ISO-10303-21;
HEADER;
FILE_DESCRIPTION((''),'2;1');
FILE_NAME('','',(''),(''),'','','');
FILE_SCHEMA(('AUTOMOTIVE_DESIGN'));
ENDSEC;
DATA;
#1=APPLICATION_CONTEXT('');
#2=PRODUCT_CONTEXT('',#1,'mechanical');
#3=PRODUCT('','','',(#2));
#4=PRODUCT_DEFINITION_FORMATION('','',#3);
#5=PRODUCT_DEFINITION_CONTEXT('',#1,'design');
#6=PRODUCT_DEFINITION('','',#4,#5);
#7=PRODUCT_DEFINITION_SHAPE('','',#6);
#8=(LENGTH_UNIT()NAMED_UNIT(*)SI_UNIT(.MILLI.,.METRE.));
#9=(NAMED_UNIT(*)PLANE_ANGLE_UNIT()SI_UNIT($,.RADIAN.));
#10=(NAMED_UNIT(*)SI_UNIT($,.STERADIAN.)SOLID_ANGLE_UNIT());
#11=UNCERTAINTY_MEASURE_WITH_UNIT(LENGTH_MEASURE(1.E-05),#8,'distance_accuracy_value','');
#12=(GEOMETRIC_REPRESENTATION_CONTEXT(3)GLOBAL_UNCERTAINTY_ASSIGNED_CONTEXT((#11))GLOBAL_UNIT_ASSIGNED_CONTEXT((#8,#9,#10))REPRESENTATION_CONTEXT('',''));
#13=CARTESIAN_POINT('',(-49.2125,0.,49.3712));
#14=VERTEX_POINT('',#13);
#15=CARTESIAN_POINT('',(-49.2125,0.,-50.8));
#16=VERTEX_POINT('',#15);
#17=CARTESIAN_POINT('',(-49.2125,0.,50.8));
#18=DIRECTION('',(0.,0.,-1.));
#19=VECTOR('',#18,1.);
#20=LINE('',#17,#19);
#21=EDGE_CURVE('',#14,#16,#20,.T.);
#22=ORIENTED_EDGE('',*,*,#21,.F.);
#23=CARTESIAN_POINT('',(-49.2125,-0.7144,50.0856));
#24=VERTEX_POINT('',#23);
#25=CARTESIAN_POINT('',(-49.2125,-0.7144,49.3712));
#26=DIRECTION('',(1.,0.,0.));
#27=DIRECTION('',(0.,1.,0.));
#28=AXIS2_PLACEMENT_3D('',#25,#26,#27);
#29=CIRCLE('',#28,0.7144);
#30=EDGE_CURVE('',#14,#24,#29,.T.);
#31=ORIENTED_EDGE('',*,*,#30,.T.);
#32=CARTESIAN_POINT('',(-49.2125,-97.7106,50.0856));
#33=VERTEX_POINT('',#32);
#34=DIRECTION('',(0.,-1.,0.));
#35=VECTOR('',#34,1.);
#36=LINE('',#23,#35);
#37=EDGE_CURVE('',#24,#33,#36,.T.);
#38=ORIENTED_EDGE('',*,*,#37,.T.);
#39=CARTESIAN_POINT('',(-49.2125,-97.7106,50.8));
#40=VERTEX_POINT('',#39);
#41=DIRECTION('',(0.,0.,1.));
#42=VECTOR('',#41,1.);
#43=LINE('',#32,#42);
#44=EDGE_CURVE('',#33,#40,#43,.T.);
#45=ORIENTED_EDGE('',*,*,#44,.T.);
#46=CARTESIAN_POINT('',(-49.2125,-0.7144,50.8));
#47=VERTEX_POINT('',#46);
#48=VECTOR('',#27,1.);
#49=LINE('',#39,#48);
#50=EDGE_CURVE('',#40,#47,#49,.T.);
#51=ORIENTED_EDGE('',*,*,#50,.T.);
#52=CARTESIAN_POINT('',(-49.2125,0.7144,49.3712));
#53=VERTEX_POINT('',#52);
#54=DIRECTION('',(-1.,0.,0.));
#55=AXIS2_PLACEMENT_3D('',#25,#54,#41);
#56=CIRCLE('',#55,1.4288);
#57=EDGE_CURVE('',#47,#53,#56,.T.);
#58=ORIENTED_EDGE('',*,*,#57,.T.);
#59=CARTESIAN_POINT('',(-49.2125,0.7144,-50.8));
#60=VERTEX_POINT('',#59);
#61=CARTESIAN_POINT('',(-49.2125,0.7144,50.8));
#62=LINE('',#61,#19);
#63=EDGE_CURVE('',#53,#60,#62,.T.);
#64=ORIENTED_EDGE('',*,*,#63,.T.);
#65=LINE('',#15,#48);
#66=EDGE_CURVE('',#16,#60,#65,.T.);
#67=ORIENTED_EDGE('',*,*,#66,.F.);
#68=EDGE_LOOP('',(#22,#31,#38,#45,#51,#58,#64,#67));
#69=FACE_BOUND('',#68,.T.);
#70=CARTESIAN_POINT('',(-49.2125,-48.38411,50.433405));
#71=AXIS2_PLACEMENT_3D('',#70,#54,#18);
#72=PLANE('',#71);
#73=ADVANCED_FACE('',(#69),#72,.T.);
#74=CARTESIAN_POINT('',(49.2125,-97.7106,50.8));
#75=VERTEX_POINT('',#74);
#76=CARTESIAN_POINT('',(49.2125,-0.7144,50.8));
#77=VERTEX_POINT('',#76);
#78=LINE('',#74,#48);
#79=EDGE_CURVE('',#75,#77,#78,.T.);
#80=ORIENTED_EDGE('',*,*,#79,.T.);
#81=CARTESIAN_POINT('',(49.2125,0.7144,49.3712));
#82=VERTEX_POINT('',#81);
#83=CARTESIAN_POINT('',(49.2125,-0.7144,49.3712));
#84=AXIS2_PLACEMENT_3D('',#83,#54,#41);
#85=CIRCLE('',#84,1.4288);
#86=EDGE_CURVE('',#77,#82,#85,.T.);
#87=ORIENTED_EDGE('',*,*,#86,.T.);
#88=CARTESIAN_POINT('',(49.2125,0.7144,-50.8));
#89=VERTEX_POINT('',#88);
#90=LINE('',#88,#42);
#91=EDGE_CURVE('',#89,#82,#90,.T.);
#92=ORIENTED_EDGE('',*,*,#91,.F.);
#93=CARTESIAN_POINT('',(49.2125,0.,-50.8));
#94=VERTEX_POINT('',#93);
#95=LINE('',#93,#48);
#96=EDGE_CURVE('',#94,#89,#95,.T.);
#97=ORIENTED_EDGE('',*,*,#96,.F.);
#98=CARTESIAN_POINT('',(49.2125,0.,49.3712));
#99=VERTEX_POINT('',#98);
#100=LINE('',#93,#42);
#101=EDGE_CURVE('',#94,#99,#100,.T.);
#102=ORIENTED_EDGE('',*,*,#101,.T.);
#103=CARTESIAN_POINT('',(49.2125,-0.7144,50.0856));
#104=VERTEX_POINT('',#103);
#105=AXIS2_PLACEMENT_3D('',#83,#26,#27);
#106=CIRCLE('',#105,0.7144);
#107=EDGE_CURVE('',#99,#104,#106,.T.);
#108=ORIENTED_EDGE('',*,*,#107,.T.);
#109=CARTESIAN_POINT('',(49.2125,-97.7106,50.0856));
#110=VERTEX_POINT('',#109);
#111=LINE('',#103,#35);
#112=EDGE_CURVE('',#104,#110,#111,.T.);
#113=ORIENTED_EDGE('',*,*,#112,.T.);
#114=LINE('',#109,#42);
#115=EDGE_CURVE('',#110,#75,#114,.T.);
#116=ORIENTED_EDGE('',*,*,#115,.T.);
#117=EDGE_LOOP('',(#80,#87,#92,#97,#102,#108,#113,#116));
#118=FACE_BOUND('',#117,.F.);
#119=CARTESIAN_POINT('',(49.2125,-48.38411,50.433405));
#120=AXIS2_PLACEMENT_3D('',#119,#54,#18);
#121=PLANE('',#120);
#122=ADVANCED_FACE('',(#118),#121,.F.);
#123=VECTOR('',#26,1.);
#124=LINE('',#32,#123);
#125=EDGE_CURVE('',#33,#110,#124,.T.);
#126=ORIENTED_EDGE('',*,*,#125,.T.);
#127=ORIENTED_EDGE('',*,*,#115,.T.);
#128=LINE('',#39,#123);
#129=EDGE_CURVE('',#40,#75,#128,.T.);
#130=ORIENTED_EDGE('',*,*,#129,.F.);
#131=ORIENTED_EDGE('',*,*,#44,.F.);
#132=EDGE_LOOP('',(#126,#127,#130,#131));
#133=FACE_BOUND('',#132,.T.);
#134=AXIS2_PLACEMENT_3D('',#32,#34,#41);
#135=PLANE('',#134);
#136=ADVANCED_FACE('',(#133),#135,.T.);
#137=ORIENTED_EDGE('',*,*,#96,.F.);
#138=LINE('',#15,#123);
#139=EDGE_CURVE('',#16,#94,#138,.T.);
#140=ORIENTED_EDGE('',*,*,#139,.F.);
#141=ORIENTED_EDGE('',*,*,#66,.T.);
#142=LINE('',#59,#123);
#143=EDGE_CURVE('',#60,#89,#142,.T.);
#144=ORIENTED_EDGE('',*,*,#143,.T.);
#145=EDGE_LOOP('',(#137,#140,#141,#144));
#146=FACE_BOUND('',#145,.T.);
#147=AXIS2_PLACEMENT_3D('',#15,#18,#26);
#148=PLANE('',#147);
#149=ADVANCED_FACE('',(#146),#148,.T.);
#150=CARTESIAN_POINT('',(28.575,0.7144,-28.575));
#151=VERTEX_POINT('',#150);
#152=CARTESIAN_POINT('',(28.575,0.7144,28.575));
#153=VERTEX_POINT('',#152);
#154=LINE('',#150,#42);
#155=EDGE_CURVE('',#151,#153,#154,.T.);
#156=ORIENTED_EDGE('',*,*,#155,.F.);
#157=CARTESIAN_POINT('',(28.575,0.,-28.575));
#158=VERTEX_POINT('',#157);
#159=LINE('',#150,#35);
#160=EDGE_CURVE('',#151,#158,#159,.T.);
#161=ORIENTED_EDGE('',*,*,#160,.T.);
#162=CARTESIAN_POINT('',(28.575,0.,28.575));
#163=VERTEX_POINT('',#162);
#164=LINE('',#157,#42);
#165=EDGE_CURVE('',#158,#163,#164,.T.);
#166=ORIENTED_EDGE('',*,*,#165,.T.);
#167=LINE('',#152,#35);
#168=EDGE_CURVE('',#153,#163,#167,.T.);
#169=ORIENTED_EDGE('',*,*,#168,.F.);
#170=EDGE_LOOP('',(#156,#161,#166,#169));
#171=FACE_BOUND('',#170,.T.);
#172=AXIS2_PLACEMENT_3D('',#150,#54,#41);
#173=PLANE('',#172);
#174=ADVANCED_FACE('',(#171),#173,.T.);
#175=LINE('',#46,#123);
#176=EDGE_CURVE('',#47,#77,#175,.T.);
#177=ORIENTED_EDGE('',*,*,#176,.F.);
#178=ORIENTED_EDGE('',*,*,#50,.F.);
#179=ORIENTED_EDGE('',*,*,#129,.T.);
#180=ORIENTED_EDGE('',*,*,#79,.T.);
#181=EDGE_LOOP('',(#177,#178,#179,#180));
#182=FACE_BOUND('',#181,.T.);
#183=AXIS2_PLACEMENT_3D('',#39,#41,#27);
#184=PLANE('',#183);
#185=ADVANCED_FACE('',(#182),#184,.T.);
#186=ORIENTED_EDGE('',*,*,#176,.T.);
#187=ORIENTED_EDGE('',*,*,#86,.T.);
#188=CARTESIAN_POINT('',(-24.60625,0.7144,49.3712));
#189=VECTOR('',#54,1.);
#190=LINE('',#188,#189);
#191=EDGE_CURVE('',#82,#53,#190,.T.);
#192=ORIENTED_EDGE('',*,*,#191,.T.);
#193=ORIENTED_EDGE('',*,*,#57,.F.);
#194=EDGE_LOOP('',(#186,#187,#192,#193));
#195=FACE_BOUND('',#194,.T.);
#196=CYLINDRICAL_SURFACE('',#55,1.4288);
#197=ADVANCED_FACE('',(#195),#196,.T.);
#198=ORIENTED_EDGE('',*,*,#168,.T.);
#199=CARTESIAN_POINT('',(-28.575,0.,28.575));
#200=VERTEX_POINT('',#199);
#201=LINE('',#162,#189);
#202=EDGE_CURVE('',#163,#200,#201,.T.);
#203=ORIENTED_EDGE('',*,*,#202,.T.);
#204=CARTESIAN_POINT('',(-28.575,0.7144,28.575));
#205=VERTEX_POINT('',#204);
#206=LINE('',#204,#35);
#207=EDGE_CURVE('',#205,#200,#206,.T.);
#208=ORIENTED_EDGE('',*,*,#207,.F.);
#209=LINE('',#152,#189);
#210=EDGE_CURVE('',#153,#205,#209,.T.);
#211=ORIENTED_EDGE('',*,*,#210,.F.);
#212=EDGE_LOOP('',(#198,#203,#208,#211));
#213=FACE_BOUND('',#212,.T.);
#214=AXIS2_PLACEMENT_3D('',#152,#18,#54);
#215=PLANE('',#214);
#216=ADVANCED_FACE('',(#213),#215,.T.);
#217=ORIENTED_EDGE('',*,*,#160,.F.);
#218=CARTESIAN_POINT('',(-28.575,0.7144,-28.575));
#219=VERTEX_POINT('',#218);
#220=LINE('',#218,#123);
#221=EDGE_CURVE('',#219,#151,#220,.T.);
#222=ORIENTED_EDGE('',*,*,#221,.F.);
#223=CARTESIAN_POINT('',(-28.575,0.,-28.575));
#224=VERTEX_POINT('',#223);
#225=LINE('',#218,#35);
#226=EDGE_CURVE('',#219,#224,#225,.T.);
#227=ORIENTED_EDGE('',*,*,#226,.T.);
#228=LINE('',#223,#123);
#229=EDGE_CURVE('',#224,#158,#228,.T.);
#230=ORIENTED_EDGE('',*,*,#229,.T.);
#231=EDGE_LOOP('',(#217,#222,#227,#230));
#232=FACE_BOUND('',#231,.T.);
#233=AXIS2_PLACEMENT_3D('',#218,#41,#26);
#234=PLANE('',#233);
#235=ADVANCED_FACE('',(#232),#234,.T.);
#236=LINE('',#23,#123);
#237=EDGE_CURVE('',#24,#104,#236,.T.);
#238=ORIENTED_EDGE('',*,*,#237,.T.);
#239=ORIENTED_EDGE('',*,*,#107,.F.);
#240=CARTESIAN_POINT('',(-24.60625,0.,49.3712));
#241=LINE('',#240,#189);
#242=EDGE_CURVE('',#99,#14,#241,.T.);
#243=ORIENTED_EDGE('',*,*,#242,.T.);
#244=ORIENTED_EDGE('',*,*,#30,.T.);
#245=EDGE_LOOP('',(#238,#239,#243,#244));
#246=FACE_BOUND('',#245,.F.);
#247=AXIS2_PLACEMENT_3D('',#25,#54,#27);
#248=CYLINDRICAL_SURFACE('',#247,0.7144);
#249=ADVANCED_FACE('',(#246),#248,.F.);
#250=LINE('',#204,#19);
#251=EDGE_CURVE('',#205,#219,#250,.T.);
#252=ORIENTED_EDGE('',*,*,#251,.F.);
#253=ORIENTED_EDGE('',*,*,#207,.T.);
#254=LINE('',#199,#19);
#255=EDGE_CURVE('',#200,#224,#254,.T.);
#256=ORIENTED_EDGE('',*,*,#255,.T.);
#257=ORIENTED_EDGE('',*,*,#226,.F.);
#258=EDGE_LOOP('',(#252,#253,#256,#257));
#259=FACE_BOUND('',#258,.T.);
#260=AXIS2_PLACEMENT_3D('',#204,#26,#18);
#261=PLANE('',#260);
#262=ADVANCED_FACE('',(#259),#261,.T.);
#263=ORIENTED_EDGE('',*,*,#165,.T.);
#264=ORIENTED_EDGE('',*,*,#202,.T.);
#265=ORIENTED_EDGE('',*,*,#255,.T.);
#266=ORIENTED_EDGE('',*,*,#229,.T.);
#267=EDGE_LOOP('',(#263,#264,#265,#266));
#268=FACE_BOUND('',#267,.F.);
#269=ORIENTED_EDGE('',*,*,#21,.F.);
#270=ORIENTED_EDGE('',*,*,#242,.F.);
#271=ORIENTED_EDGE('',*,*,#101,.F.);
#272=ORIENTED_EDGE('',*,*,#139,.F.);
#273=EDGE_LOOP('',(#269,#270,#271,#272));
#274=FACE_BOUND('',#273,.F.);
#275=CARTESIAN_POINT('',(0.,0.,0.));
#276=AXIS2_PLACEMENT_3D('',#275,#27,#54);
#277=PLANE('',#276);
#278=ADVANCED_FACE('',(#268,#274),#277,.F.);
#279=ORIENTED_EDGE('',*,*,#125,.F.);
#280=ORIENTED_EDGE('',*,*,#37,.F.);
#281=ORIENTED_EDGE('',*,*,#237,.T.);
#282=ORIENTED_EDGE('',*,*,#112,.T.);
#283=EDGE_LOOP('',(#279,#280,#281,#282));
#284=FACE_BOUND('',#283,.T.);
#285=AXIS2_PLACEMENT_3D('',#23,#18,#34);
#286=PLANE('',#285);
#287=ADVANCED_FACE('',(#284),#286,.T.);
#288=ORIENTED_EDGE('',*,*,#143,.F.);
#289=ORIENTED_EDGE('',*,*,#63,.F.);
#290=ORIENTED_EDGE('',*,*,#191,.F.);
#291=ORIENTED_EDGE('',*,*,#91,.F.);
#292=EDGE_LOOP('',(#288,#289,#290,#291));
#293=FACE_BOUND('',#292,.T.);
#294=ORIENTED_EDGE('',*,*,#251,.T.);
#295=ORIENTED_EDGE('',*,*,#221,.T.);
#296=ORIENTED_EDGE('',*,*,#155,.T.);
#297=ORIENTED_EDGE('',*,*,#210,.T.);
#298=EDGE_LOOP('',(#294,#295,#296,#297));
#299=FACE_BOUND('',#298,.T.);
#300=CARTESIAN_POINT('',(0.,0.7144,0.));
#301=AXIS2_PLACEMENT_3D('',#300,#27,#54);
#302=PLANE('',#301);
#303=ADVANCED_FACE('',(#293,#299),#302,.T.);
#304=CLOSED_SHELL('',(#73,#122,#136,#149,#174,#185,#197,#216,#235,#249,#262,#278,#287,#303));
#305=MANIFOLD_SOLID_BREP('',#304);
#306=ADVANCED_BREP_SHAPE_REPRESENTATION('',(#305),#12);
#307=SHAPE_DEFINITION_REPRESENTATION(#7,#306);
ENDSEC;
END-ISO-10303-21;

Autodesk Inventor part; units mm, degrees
ref_plane "YZ Plane" through (0, 0, 0) normal (1, 0, 0) x (0, 1, 0)
ref_plane "XZ Plane" through (0, 0, 0) normal (0, 1, 0) x (-1, 0, 0)
ref_plane "XY Plane" through (0, 0, 0) normal (0, 0, 1) x (1, 0, 0)
sketch "Sketch1" plane through (0, 0, 0) normal (0, 1, 0) x (-1, 0, 0)
  line L0 (-49.2125, 50.8) -> (49.2125, 50.8)
  line L1 (49.2125, 50.8) -> (49.2125, -50.8)
  line L2 (49.2125, -50.8) -> (-49.2125, -50.8)
  line L3 (-49.2125, -50.8) -> (-49.2125, 50.8)
  line L4 (-49.2125, 50.8) -> (49.2125, -50.8) construction
  line L5 (49.2125, 50.8) -> (-49.2125, -50.8) construction
  point P0 (0, 0)
  dimension "d0" = 98.425
  dimension "d1" = 101.6
extrude "Plate1" add sketch "Sketch1" along normal blind 0.7144
sketch "Sketch2" plane through (-49.2125, 0.7144, 50.0856) normal (0, 0, 1) x (1, 0, 0)
  line L0 (98.425, 0) -> (0, 0)
  line L1 (0, 0) -> (0, -98.425)
  line L2 (0, -98.425) -> (98.425, -98.425)
  line L3 (98.425, -98.425) -> (98.425, 0)
edge flange "Flange1" height 98.425 angle 90 thickness 0.7144 bend radius 0.7144 thickness toward (0, 0, 1) relief tear relief width 0.7144 relief depth 0.3572 edges at (0, 0, 50.8) wall of the first edge with corners at (49.2125, 0.7144, 50.0856) (-49.2125, 0.7144, 50.0856) (-49.2125, -97.7106, 50.0856) (49.2125, -97.7106, 50.0856)
bend "Bend1"
corner "Corner1"
sketch "Sketch3" plane through (0, 0.7144, 0) normal (0, 1, 0) x (1, 0, 0)
  line L0 (28.575, -28.575) -> (-28.575, -28.575)
  line L1 (-28.575, -28.575) -> (-28.575, 28.575)
  line L2 (-28.575, 28.575) -> (28.575, 28.575)
  line L3 (28.575, 28.575) -> (28.575, -28.575)
  line L4 (28.575, -28.575) -> (-28.575, 28.575) construction
  line L5 (-28.575, -28.575) -> (28.575, 28.575) construction
  point P0 (0, 0)
  dimension "d13" = 57.15
  dimension "d14" = 57.15
extrude "Extrusion1" cut sketch "Sketch3" against normal blind 0.7144
equation "\"d15\" = Thickness"
equation "\"d2\" = Thickness"
equation "\"d3\" = BendReliefWidth"
equation "\"d4\" = BendReliefDepth"
equation "\"d5\" = MinimumRemnant"
equation "\"d6\" = TransitionRadius"
equation "\"d9\" = BendRadius"
equation "\"d10\" = CornerReliefSize"
equation "\"d11\" = GapSize"
equation "\"d12\" = JacobiRadiusSize"
equation "\"BendRadius\" = Thickness"
equation "\"BendReliefWidth\" = Thickness"
equation "\"BendReliefDepth\" = 0.5 * Thickness"
equation "\"CornerReliefSize\" = 4 * Thickness"
equation "\"MinimumRemnant\" = 2 * Thickness"
equation "\"TransitionRadius\" = BendRadius"
equation "\"JacobiRadiusSize\" = BendRadius"
equation "\"GapSize\" = Thickness"
equation "\"Thickness\" = 0.714375"
